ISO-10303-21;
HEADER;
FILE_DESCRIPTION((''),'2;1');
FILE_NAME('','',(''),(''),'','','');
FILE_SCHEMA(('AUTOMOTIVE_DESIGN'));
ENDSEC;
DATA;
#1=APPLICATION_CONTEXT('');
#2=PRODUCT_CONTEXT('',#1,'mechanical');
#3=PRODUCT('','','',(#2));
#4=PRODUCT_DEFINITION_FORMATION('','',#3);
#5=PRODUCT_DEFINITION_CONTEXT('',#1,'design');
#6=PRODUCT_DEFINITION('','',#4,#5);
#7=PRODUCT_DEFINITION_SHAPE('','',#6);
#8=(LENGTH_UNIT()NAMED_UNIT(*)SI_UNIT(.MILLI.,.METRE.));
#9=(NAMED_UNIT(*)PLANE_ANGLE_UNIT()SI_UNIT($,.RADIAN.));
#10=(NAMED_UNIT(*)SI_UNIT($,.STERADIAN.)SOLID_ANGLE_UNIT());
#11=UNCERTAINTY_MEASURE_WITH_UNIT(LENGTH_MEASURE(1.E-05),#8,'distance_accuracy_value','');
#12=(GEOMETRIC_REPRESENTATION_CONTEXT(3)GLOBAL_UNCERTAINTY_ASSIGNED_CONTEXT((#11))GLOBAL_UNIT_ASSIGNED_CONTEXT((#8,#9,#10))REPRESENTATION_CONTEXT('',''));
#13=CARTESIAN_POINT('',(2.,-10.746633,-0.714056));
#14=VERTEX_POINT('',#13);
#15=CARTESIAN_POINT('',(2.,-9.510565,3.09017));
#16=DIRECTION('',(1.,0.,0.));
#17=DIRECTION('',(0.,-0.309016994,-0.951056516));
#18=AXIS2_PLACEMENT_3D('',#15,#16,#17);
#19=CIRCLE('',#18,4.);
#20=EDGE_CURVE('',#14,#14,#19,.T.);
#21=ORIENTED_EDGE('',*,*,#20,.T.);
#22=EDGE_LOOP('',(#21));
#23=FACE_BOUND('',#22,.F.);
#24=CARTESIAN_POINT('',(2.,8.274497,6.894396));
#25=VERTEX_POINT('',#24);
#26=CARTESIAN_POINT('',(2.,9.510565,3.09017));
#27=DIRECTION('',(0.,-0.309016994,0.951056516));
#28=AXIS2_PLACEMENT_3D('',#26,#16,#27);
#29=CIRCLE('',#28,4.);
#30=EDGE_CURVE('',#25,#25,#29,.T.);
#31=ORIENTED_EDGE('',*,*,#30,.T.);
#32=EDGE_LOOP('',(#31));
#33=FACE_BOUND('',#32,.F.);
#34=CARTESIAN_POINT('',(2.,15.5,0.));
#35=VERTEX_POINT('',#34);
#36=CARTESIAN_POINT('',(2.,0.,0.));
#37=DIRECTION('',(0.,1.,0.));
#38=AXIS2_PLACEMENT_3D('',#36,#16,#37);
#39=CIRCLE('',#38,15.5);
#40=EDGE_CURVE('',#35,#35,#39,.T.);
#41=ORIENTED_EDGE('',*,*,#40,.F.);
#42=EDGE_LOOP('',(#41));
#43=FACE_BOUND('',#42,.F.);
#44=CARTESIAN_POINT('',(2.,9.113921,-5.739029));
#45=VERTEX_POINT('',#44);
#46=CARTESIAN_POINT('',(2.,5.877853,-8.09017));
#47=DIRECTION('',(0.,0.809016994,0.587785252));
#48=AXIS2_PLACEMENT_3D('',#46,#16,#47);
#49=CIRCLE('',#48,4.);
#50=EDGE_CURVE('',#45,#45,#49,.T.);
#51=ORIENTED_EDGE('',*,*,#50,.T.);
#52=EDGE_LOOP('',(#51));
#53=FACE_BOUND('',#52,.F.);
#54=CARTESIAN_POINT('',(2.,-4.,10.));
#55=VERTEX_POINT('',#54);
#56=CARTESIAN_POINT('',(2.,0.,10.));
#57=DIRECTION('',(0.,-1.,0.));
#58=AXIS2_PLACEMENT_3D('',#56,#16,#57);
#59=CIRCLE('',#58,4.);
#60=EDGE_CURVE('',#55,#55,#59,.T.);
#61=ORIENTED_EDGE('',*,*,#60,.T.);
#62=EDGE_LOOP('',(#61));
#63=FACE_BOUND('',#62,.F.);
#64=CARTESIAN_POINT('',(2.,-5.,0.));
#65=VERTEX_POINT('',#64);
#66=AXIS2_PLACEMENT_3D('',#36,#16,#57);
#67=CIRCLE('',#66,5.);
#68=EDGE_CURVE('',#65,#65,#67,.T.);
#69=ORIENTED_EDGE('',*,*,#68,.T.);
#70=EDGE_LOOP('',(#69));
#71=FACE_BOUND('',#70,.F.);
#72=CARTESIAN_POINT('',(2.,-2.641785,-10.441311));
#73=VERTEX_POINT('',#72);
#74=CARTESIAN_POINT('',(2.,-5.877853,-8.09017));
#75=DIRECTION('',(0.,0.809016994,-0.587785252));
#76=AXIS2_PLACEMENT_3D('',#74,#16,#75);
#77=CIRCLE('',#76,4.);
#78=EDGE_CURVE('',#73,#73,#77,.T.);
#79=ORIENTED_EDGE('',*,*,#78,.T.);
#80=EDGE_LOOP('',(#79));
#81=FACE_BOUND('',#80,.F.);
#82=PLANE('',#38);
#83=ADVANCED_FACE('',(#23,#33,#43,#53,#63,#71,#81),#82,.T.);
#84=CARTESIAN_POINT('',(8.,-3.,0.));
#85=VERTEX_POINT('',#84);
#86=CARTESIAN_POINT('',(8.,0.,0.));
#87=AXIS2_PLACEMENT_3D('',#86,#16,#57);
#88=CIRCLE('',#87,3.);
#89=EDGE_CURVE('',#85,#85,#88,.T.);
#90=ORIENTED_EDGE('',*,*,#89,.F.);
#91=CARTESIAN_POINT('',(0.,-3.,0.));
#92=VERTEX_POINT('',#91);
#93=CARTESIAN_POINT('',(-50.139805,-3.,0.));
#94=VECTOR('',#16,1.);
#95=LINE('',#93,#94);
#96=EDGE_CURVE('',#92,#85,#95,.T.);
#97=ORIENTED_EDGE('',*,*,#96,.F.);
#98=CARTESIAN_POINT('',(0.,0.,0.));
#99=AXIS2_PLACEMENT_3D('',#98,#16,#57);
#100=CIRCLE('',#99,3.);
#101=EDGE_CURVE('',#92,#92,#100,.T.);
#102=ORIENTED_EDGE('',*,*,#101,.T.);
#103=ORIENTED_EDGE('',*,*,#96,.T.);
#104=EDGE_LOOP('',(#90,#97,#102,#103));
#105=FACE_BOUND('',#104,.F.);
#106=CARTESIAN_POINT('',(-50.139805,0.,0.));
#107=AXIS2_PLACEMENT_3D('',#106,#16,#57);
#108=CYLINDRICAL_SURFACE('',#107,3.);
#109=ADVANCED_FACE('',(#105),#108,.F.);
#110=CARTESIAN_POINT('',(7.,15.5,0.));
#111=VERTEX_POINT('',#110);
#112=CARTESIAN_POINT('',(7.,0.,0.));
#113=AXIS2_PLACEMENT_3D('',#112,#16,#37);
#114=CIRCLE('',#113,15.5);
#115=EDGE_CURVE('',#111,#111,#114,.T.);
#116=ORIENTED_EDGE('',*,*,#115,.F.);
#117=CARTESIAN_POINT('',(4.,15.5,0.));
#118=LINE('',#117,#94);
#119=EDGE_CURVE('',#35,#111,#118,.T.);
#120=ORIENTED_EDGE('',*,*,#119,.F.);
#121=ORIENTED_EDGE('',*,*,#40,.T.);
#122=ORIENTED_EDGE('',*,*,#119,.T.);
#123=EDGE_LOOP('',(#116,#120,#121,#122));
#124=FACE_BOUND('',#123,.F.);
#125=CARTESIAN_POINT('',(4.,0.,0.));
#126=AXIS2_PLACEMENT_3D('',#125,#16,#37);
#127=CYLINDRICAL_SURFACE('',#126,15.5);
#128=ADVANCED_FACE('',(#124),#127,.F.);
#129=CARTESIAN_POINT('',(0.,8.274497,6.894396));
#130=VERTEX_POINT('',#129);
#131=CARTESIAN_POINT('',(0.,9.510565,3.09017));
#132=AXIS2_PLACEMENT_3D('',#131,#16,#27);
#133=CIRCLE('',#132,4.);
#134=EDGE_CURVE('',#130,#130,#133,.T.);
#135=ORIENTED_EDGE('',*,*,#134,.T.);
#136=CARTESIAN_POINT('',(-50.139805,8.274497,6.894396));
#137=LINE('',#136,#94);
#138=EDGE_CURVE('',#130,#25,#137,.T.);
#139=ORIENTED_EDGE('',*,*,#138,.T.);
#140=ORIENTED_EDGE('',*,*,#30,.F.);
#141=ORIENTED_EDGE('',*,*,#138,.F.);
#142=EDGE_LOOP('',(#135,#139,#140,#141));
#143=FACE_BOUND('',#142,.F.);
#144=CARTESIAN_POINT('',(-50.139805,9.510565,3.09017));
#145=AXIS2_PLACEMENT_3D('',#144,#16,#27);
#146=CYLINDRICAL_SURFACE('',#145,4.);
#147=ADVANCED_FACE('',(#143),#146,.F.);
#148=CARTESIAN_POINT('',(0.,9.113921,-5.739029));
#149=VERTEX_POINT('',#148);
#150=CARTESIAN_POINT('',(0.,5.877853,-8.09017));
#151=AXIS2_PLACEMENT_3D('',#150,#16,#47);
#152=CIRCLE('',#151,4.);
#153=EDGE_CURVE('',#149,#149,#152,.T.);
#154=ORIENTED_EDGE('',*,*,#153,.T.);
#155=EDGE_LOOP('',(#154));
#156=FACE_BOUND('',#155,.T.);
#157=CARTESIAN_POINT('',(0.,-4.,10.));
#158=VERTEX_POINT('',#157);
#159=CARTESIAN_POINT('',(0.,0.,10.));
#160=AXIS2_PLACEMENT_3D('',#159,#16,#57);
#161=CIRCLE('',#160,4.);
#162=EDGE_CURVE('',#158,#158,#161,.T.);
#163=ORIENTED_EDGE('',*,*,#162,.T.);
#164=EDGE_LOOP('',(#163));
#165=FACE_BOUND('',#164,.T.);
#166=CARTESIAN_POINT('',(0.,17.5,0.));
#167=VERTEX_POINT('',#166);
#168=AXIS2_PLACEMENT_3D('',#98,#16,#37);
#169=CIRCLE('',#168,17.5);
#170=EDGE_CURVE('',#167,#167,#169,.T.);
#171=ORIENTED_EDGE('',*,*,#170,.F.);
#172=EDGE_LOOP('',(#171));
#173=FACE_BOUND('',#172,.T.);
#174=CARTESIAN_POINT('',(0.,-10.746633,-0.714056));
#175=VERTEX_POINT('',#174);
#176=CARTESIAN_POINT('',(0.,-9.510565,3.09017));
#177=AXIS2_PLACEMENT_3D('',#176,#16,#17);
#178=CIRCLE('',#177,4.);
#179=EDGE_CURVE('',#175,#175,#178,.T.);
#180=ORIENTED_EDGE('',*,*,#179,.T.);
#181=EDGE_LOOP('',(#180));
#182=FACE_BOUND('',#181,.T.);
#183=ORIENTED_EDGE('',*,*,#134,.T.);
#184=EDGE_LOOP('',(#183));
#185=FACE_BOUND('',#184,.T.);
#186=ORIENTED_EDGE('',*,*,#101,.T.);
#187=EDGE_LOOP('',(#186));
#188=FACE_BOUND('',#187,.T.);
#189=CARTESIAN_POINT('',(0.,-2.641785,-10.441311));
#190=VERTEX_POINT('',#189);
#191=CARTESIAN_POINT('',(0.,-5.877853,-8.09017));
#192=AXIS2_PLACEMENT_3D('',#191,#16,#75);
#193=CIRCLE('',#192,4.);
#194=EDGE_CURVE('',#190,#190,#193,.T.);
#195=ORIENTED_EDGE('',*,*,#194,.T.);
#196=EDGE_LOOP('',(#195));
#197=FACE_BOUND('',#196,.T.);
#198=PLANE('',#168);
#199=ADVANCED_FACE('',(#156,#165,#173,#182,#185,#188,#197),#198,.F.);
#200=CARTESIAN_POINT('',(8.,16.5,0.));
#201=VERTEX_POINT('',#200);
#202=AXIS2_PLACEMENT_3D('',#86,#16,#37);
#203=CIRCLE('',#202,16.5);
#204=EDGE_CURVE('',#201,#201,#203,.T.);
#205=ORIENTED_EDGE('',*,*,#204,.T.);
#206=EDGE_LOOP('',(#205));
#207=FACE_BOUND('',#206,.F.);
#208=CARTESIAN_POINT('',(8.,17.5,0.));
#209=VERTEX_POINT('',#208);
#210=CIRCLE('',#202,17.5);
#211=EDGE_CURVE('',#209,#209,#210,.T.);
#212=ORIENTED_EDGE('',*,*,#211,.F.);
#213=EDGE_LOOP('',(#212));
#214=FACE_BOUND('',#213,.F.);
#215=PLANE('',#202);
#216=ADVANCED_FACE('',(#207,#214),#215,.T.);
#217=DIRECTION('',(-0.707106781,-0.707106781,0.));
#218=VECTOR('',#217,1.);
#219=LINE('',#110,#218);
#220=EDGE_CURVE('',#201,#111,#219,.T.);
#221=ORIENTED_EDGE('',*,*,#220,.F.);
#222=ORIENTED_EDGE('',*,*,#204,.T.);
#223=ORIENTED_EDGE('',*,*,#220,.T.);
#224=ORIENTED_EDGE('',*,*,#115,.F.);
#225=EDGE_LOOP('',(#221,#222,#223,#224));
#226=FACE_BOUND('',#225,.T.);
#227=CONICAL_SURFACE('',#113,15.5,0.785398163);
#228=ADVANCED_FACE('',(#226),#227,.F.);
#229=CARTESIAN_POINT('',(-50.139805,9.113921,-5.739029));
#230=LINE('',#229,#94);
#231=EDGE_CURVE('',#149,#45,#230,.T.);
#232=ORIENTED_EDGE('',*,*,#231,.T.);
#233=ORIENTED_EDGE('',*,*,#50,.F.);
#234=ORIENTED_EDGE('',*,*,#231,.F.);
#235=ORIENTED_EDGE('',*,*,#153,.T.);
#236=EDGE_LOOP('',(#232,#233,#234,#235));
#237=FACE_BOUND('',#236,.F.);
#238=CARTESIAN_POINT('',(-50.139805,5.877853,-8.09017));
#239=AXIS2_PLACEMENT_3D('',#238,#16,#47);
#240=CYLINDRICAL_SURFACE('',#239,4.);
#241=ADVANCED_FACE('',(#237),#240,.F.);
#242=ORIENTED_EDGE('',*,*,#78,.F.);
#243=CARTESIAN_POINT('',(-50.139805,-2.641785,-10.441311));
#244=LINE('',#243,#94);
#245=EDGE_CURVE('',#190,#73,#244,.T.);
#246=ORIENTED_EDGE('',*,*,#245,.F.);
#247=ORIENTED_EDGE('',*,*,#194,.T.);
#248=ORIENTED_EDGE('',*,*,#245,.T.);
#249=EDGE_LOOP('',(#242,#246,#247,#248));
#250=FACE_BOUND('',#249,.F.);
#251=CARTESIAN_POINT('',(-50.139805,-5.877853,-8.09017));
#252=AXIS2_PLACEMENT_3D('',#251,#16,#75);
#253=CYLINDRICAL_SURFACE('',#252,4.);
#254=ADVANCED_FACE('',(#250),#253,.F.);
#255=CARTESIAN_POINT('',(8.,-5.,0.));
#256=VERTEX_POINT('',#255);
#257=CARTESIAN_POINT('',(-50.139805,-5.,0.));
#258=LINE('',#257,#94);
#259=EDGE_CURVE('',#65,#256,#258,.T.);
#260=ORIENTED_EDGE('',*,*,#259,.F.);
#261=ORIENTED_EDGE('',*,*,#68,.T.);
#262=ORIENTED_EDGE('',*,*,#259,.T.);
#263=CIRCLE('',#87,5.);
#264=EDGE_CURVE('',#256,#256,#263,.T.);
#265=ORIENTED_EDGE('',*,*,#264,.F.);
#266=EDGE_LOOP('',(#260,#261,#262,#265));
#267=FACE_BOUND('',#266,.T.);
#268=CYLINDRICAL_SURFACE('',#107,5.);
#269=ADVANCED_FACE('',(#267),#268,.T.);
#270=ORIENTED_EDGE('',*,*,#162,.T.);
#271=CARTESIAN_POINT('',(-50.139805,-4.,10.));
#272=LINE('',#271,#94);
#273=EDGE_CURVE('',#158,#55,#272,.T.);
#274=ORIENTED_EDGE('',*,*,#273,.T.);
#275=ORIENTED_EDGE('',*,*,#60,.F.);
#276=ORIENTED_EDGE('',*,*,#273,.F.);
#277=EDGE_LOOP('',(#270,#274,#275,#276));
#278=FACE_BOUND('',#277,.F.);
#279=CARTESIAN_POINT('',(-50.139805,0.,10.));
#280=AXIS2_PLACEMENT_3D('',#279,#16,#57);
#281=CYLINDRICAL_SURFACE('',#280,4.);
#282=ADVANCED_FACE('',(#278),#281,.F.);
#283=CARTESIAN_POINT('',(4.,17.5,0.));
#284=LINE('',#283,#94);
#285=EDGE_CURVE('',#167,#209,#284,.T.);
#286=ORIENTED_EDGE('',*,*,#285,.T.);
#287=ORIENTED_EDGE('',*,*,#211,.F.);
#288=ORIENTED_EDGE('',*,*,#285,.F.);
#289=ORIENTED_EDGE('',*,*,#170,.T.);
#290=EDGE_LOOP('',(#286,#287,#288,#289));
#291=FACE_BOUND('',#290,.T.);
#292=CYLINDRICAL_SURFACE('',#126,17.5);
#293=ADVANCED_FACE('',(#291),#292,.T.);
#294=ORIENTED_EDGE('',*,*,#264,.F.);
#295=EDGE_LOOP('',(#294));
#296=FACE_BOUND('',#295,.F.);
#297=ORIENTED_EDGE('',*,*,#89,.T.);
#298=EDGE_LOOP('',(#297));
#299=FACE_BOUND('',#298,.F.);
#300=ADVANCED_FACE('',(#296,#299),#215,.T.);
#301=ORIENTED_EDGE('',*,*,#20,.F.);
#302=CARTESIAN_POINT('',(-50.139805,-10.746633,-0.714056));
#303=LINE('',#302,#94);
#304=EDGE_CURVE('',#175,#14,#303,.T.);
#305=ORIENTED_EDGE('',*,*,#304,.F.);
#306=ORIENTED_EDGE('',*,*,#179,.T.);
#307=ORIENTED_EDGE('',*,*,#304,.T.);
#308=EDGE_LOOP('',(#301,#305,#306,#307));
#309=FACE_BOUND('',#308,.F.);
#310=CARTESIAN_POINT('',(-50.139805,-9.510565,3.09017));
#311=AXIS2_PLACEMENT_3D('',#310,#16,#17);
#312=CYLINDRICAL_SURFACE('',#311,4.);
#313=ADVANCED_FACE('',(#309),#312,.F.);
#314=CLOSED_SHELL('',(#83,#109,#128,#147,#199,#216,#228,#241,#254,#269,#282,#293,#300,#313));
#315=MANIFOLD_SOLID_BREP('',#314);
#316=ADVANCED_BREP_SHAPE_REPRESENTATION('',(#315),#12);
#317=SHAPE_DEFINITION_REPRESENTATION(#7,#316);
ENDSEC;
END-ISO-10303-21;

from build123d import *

# Parameters (mm, degrees)
F0_W            = 8
F0_H            = 17.5
F3_D            = 6
F4_T            = -2
F6_D            = 8
F6_COPIES_COUNT = 5
F7_SIZE         = 1


# Not quite as in the source:
# - a pattern or mirror of a feature is missing from the dataset's text; its kind, count and spacing are read off the source's solid


with BuildPart() as f1:
    # F0 (on Top) → F1 (revolve)
    with BuildSketch(Plane.XY):
        with Locations((4, 8.75)):
            Rectangle(F0_W, F0_H)
    revolve(axis=Axis((4, 0, 0), (1, 0, 0)))

    # F3 (through all)
    with Locations(Plane(origin=(0, 0, 0), x_dir=(0, 1, 0), z_dir=(-1, 0, 0))):
        with Locations((0, 0)):
            Hole(F3_D / 2)

    # F4
    f4_openings = [f1.faces().sort_by_distance(p)[0] for p in [
        (8, -17.005025, 0),
    ]]
    offset(amount=F4_T, openings=f4_openings)

    # F6 (through all)
    with Locations(Plane(origin=(0, 0, 0), x_dir=(0, 1, 0), z_dir=(-1, 0, 0))):
        with Locations((0, -10)):
            f6 = Hole(F6_D / 2)

    # F6_copies: F6 ×5 about axis
    f6_copies_axis = Axis((0, 0, 0), (1, 0, 0))
    for i in range(1, F6_COPIES_COUNT):
        add(f6.rotate(f6_copies_axis, i * 360 / F6_COPIES_COUNT), mode=Mode.SUBTRACT)

    # F7
    f7_edges = [f1.edges().sort_by_distance(p)[0] for p in [
        (8, -15.5, 0),
    ]]
    chamfer(f7_edges, length=F7_SIZE)


solid = f1.part
